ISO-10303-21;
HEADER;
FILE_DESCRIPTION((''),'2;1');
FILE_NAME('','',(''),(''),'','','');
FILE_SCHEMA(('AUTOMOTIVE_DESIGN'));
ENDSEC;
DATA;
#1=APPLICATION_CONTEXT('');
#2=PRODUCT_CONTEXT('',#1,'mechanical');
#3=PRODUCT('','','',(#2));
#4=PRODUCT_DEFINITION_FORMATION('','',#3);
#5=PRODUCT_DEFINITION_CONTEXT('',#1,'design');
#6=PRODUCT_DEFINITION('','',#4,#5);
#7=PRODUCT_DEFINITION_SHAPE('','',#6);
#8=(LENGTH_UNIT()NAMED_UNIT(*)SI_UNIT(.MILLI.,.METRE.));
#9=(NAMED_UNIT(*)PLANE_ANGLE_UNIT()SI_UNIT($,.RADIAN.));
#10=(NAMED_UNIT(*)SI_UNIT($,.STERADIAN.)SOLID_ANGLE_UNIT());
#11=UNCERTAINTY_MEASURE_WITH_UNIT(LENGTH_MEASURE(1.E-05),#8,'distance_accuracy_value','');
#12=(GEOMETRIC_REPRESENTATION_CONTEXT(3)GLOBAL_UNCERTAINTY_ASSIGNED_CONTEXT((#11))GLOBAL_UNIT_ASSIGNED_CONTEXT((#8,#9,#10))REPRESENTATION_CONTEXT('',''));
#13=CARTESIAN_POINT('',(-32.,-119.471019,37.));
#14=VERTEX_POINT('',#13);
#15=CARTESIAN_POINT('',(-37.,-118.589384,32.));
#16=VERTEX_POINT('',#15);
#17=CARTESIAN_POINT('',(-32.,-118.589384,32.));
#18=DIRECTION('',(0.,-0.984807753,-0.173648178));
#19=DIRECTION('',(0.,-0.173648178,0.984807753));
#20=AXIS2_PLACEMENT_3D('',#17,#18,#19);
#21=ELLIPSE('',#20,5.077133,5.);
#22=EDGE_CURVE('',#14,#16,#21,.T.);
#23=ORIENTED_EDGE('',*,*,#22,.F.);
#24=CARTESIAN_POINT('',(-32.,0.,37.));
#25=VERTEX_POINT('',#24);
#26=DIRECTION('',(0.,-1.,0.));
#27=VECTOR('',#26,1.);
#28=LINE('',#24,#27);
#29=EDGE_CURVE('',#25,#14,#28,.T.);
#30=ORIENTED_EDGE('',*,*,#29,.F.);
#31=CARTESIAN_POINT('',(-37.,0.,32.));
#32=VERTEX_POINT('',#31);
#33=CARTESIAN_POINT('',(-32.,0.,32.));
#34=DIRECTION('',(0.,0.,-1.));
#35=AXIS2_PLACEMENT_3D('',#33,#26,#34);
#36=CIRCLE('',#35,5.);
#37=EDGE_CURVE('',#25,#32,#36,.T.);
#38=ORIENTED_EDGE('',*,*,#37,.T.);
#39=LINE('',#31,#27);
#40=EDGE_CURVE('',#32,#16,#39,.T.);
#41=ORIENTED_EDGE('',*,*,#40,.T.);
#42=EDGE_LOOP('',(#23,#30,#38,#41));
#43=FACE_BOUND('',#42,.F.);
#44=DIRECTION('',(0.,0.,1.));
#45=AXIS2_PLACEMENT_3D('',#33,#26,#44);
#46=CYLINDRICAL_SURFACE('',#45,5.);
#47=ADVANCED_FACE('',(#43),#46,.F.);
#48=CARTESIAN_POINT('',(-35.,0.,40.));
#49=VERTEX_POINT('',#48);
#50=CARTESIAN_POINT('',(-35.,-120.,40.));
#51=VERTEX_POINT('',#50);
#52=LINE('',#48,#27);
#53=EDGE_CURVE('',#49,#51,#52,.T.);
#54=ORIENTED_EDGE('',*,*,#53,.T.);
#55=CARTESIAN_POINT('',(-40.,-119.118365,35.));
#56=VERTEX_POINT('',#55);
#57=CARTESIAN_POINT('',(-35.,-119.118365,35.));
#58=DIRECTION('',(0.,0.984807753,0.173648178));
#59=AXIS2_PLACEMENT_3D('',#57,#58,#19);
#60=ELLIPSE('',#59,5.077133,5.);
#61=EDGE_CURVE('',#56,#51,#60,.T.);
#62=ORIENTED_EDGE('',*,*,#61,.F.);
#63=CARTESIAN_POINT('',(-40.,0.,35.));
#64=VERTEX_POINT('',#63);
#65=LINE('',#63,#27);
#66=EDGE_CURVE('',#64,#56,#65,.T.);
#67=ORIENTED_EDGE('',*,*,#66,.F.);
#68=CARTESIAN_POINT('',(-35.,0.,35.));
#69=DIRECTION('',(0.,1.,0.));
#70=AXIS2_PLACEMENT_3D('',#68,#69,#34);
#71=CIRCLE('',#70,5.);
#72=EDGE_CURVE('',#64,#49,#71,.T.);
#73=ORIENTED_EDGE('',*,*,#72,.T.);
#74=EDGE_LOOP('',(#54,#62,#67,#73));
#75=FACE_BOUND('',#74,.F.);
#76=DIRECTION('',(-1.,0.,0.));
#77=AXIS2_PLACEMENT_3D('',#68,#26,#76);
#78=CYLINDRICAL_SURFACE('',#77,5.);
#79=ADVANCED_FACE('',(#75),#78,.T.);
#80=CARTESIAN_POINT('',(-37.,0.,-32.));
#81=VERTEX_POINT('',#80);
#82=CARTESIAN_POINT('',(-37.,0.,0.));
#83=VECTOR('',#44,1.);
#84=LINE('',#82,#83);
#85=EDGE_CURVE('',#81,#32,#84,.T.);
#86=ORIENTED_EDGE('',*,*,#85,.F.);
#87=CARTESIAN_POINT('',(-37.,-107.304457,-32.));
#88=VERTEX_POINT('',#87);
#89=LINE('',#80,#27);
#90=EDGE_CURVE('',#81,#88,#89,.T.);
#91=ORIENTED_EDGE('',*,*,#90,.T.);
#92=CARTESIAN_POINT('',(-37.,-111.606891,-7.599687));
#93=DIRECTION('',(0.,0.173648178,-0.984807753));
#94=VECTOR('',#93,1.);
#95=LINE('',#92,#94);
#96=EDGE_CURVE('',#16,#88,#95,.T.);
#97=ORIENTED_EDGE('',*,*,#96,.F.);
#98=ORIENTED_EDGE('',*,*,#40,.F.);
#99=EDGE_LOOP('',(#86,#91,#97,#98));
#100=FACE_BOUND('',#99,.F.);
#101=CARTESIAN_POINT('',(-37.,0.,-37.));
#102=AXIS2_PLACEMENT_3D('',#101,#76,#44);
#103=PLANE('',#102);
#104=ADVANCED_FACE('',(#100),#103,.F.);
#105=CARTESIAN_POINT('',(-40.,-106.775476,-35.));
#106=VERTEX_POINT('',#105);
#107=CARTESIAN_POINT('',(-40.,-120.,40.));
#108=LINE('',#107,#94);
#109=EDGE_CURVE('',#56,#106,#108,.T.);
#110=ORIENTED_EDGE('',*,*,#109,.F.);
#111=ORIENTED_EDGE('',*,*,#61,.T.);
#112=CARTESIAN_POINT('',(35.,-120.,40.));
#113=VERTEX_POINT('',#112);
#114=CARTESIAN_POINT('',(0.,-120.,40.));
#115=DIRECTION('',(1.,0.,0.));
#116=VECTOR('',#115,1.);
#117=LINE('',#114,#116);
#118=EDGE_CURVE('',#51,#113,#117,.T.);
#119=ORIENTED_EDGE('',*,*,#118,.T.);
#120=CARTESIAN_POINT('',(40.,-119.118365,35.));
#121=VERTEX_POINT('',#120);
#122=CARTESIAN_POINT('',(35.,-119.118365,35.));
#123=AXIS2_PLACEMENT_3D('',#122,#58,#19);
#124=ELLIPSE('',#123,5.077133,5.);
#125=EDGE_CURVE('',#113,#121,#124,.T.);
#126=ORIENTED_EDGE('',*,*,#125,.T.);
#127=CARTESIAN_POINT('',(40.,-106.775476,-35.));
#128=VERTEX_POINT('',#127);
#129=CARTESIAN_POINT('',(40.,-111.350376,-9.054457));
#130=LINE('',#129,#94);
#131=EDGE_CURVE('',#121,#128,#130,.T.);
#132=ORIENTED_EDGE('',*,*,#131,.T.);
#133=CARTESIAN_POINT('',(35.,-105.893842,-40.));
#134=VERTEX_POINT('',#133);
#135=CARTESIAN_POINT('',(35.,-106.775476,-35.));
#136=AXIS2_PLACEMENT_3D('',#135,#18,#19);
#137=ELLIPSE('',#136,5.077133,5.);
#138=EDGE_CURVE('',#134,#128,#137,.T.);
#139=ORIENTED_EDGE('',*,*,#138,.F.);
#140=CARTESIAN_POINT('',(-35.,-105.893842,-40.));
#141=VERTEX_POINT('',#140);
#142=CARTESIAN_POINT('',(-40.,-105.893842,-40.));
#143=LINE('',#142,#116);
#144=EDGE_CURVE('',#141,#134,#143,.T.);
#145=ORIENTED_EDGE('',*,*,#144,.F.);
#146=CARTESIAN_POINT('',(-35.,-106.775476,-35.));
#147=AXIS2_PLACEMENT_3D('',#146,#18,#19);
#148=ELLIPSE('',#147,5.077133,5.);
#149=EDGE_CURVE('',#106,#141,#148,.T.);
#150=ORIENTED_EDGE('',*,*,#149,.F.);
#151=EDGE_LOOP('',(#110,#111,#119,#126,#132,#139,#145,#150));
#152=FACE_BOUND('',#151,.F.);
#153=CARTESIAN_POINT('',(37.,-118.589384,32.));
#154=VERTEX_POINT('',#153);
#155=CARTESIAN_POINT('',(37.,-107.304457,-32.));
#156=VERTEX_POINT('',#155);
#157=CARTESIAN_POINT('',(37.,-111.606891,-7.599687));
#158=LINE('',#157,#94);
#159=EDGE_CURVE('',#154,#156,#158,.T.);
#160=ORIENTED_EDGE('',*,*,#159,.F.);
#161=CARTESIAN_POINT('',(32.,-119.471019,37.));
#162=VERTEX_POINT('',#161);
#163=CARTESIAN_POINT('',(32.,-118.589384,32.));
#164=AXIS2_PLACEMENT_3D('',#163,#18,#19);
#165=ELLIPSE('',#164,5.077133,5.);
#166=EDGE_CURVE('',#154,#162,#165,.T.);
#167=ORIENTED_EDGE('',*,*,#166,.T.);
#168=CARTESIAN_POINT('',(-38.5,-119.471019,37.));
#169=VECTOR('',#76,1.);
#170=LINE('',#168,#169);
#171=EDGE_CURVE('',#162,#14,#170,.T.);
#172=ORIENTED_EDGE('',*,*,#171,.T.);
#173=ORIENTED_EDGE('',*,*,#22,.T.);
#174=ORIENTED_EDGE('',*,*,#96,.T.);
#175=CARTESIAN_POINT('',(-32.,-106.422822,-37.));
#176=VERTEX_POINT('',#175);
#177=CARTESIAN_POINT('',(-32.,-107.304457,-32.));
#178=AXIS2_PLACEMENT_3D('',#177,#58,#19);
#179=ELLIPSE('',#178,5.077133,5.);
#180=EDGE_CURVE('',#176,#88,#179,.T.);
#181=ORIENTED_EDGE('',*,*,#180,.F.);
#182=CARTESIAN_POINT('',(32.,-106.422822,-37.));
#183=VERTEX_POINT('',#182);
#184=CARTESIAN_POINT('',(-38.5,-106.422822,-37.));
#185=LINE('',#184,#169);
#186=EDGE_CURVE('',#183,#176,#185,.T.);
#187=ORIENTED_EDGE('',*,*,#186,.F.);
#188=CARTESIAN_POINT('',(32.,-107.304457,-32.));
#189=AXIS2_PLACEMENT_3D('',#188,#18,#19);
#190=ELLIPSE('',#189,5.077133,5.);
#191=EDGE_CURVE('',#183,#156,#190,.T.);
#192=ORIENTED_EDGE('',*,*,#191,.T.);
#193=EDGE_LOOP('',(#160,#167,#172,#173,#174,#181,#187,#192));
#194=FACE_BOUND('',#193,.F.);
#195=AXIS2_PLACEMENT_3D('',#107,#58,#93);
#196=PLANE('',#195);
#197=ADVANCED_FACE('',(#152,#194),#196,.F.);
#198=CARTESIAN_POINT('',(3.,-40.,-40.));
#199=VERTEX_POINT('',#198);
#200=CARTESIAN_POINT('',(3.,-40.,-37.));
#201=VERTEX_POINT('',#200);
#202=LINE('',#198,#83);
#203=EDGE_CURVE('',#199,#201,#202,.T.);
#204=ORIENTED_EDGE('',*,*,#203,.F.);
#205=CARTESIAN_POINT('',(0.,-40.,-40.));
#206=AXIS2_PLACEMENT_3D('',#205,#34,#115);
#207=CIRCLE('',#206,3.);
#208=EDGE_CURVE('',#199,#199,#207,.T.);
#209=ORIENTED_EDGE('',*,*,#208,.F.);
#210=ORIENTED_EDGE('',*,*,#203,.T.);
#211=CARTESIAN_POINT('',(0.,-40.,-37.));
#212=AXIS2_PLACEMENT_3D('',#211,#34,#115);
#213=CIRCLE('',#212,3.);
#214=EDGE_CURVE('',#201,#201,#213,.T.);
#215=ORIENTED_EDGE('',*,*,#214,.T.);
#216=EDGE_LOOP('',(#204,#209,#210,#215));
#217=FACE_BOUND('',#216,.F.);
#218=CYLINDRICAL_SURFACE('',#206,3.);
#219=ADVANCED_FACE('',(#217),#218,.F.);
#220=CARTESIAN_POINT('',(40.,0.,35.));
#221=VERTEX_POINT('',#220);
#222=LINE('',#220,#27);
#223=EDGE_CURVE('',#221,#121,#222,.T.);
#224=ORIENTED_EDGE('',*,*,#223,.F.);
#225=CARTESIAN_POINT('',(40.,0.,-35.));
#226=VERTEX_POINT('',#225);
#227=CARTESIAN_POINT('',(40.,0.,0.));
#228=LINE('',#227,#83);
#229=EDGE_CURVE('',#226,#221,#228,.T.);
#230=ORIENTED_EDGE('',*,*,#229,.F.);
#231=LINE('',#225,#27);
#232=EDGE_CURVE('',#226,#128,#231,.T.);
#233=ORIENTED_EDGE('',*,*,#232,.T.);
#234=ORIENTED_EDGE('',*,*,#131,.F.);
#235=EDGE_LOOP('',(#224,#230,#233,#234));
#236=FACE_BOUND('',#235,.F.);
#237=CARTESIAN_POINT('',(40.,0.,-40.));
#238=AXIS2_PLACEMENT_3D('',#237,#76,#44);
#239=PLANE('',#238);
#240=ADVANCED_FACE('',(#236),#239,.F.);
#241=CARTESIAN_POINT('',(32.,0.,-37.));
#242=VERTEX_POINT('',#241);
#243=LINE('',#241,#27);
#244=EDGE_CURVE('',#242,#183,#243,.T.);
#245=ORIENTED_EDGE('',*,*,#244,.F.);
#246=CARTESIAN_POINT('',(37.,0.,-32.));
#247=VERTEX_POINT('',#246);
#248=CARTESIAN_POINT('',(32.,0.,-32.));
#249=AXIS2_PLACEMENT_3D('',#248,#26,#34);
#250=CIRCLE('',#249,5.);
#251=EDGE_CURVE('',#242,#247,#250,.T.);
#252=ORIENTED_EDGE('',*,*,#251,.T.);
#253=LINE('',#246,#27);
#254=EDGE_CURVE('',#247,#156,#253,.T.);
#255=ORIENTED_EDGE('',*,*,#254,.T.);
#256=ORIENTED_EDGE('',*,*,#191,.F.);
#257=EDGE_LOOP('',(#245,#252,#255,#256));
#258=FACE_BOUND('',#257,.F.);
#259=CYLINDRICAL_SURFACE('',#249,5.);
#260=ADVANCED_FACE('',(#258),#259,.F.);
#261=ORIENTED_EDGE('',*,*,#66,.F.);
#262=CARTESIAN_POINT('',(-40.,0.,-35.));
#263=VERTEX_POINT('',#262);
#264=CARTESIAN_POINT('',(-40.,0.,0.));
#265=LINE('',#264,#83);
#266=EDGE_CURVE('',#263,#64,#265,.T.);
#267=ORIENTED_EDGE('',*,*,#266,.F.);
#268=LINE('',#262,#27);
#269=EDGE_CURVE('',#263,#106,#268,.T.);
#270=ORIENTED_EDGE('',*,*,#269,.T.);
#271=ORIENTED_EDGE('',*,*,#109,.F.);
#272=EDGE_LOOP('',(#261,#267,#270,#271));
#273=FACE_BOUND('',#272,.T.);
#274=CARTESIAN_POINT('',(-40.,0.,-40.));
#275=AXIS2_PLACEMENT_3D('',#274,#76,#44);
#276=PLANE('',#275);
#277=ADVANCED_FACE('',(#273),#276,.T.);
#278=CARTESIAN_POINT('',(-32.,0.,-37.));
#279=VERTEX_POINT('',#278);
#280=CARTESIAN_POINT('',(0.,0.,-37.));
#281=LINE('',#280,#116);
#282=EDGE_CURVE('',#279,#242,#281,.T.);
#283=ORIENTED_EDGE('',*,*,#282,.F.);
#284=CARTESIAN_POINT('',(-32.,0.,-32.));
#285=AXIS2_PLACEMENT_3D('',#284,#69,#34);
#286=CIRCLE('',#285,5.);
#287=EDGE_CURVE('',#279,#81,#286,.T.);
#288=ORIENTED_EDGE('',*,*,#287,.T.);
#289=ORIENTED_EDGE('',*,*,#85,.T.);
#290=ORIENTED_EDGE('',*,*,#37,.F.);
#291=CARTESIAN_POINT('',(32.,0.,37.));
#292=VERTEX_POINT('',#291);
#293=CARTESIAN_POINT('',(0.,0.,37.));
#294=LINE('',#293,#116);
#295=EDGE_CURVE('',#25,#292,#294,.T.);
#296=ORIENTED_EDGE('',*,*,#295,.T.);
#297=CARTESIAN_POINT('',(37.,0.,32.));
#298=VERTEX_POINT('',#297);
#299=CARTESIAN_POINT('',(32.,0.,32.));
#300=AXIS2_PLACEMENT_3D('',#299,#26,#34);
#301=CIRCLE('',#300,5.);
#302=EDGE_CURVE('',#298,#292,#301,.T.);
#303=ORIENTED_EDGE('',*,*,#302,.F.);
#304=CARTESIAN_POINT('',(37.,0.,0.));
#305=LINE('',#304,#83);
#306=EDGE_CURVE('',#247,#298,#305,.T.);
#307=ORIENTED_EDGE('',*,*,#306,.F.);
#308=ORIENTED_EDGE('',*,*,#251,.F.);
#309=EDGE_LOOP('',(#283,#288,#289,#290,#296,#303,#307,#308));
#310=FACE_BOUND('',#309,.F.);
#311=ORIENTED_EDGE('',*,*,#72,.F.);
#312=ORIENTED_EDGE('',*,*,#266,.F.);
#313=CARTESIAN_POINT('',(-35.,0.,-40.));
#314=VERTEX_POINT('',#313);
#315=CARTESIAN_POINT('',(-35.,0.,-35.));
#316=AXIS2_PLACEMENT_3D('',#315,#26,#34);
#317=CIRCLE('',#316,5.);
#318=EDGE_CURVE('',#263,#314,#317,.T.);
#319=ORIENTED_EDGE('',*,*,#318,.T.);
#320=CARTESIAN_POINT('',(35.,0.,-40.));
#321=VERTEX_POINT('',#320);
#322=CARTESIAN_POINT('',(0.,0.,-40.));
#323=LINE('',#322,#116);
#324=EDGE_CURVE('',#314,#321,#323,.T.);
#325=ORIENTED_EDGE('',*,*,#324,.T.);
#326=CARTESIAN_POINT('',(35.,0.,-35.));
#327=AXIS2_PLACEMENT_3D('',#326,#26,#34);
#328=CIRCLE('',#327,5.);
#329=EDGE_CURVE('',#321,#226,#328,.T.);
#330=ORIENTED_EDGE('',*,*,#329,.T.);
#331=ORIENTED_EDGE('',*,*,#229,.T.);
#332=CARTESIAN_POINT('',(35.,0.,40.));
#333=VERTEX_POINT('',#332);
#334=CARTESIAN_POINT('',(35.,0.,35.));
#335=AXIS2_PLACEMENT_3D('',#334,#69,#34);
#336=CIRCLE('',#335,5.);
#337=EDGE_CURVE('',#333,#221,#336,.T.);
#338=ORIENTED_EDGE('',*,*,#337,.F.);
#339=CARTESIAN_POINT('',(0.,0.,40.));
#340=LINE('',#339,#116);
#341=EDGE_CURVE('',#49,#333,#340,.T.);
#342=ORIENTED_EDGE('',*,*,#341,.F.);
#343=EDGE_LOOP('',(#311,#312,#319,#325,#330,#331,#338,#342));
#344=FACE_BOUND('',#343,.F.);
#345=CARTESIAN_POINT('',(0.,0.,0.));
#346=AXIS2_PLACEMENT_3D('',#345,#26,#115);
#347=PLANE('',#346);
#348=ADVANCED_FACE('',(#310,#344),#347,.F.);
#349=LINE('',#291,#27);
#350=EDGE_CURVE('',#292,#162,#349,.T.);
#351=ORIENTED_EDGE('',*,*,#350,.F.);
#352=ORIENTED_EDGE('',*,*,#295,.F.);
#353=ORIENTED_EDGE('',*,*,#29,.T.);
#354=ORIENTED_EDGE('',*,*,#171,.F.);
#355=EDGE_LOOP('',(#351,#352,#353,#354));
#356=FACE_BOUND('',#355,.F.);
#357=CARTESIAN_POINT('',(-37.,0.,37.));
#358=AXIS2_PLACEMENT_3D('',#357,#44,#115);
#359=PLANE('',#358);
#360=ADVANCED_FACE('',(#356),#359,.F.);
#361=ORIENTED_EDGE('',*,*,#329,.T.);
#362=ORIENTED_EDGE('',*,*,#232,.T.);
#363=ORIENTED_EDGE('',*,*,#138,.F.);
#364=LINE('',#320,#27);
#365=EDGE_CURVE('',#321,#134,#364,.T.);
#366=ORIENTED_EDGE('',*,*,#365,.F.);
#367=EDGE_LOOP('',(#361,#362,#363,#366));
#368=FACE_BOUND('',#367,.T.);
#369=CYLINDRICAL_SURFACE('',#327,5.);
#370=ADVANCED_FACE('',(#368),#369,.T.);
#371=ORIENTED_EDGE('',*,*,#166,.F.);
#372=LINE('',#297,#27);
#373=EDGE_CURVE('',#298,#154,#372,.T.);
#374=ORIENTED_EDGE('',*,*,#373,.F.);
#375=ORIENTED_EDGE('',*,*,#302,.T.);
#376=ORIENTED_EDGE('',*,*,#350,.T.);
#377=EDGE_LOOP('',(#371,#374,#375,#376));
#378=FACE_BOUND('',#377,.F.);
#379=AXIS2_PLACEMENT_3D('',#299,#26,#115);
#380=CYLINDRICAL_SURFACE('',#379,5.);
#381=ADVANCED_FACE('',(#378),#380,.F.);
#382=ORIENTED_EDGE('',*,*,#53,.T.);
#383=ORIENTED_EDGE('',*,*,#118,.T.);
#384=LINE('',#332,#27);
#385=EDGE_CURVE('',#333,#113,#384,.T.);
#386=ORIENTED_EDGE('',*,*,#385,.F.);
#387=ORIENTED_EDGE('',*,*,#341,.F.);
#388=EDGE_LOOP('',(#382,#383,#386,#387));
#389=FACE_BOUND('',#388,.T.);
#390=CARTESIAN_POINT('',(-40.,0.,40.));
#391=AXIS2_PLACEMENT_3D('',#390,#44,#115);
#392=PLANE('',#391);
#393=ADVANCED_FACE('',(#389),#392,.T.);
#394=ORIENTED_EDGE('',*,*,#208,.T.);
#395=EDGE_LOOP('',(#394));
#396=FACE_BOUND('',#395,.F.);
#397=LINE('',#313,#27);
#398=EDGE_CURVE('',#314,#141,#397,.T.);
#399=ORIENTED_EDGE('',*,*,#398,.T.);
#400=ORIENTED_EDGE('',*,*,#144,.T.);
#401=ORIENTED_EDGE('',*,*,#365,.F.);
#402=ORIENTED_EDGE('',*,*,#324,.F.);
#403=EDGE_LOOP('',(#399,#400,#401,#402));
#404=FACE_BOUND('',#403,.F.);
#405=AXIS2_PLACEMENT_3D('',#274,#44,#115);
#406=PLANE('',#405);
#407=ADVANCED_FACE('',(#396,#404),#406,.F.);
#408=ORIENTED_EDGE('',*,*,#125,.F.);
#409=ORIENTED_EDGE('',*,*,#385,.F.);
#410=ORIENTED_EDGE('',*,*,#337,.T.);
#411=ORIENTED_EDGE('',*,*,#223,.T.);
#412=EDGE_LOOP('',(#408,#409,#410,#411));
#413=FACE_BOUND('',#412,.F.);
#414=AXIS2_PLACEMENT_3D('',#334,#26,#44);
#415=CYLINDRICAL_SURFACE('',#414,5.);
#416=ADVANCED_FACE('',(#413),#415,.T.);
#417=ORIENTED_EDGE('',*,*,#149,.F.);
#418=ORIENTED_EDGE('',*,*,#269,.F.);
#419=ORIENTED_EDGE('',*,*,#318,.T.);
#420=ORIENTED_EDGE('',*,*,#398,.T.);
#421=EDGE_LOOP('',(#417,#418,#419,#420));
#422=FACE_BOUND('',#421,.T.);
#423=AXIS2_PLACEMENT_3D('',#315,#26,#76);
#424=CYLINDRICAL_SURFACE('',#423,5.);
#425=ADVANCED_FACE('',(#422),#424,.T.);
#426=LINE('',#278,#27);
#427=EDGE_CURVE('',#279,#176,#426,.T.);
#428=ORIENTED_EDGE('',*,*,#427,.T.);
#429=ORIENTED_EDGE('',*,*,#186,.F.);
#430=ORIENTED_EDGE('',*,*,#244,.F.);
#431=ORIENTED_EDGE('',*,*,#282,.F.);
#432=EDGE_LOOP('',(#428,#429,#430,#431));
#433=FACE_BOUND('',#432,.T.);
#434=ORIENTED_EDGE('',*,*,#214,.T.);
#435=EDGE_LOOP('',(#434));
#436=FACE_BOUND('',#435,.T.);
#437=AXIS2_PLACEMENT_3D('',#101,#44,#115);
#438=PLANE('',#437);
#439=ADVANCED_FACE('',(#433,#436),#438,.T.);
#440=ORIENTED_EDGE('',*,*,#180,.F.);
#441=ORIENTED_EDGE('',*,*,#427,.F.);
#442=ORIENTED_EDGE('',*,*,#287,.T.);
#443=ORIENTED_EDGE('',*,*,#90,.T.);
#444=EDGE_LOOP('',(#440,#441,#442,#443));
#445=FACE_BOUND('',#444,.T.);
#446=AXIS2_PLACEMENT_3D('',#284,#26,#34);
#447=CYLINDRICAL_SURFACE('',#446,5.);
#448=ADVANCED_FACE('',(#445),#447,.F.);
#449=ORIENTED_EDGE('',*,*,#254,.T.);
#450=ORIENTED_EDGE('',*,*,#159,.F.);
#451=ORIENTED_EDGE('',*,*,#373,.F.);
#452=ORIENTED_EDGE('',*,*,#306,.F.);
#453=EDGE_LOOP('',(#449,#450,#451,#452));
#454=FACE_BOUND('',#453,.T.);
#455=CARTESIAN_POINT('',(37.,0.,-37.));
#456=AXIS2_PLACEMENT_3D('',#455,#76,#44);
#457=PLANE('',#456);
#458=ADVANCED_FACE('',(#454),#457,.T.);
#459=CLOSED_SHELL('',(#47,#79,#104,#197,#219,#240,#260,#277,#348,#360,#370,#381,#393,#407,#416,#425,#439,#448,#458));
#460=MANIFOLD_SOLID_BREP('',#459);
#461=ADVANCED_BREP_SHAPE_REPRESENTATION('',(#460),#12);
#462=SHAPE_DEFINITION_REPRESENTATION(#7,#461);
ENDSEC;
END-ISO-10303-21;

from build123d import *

# Parameters (mm, degrees)
F0_W     = 80
F0_H     = 80
F0_W_2   = 74
F0_H_2   = 74
F1_DEPTH = 120
F3_DEPTH = 80.001
F4_R     = 3
F5_DEPTH = 25
F6_R     = 5


# Not quite as in the source:
# - a feature names something its author has since deleted; it is built from what else it names


with BuildPart() as f1:
    # F0 (on Front) → F1 (new body)
    with BuildSketch(Plane.XZ):
        Rectangle(F0_W, F0_H)
        Rectangle(F0_W_2, F0_H_2, mode=Mode.SUBTRACT)
    extrude(amount=F1_DEPTH)

    # F2 (on face) → F3 (cut, through all)
    with BuildSketch(Plane(origin=(-40, 0, 0), x_dir=(0, -1, 0), z_dir=(-1, 0, 0))):
        Polygon((120, -40), (120, 40), (105.8938415433, -40), align=None)
    extrude(amount=-F3_DEPTH, mode=Mode.SUBTRACT)

    # F4 (on face) → F5 (cut)
    with BuildSketch(Plane(origin=(0, 0, -40), x_dir=(1, 0, 0), z_dir=(0, 0, -1))):
        with Locations((0, 40)):
            Circle(F4_R)
    extrude(amount=-F5_DEPTH, mode=Mode.SUBTRACT)

    # F6
    f6_edges = [f1.edges().sort_by_distance(p)[0] for p in [
        (40, -60, 40),
        (40, -52.946921, -40),
        (-40, -60, 40),
        (-40, -52.946921, -40),
        (37, -59.73551, 37),
        (37, -53.211411, -37),
        (-37, -53.211411, -37),
        (-37, -59.73551, 37),
    ]]
    fillet(f6_edges, radius=F6_R)


solid = f1.part
